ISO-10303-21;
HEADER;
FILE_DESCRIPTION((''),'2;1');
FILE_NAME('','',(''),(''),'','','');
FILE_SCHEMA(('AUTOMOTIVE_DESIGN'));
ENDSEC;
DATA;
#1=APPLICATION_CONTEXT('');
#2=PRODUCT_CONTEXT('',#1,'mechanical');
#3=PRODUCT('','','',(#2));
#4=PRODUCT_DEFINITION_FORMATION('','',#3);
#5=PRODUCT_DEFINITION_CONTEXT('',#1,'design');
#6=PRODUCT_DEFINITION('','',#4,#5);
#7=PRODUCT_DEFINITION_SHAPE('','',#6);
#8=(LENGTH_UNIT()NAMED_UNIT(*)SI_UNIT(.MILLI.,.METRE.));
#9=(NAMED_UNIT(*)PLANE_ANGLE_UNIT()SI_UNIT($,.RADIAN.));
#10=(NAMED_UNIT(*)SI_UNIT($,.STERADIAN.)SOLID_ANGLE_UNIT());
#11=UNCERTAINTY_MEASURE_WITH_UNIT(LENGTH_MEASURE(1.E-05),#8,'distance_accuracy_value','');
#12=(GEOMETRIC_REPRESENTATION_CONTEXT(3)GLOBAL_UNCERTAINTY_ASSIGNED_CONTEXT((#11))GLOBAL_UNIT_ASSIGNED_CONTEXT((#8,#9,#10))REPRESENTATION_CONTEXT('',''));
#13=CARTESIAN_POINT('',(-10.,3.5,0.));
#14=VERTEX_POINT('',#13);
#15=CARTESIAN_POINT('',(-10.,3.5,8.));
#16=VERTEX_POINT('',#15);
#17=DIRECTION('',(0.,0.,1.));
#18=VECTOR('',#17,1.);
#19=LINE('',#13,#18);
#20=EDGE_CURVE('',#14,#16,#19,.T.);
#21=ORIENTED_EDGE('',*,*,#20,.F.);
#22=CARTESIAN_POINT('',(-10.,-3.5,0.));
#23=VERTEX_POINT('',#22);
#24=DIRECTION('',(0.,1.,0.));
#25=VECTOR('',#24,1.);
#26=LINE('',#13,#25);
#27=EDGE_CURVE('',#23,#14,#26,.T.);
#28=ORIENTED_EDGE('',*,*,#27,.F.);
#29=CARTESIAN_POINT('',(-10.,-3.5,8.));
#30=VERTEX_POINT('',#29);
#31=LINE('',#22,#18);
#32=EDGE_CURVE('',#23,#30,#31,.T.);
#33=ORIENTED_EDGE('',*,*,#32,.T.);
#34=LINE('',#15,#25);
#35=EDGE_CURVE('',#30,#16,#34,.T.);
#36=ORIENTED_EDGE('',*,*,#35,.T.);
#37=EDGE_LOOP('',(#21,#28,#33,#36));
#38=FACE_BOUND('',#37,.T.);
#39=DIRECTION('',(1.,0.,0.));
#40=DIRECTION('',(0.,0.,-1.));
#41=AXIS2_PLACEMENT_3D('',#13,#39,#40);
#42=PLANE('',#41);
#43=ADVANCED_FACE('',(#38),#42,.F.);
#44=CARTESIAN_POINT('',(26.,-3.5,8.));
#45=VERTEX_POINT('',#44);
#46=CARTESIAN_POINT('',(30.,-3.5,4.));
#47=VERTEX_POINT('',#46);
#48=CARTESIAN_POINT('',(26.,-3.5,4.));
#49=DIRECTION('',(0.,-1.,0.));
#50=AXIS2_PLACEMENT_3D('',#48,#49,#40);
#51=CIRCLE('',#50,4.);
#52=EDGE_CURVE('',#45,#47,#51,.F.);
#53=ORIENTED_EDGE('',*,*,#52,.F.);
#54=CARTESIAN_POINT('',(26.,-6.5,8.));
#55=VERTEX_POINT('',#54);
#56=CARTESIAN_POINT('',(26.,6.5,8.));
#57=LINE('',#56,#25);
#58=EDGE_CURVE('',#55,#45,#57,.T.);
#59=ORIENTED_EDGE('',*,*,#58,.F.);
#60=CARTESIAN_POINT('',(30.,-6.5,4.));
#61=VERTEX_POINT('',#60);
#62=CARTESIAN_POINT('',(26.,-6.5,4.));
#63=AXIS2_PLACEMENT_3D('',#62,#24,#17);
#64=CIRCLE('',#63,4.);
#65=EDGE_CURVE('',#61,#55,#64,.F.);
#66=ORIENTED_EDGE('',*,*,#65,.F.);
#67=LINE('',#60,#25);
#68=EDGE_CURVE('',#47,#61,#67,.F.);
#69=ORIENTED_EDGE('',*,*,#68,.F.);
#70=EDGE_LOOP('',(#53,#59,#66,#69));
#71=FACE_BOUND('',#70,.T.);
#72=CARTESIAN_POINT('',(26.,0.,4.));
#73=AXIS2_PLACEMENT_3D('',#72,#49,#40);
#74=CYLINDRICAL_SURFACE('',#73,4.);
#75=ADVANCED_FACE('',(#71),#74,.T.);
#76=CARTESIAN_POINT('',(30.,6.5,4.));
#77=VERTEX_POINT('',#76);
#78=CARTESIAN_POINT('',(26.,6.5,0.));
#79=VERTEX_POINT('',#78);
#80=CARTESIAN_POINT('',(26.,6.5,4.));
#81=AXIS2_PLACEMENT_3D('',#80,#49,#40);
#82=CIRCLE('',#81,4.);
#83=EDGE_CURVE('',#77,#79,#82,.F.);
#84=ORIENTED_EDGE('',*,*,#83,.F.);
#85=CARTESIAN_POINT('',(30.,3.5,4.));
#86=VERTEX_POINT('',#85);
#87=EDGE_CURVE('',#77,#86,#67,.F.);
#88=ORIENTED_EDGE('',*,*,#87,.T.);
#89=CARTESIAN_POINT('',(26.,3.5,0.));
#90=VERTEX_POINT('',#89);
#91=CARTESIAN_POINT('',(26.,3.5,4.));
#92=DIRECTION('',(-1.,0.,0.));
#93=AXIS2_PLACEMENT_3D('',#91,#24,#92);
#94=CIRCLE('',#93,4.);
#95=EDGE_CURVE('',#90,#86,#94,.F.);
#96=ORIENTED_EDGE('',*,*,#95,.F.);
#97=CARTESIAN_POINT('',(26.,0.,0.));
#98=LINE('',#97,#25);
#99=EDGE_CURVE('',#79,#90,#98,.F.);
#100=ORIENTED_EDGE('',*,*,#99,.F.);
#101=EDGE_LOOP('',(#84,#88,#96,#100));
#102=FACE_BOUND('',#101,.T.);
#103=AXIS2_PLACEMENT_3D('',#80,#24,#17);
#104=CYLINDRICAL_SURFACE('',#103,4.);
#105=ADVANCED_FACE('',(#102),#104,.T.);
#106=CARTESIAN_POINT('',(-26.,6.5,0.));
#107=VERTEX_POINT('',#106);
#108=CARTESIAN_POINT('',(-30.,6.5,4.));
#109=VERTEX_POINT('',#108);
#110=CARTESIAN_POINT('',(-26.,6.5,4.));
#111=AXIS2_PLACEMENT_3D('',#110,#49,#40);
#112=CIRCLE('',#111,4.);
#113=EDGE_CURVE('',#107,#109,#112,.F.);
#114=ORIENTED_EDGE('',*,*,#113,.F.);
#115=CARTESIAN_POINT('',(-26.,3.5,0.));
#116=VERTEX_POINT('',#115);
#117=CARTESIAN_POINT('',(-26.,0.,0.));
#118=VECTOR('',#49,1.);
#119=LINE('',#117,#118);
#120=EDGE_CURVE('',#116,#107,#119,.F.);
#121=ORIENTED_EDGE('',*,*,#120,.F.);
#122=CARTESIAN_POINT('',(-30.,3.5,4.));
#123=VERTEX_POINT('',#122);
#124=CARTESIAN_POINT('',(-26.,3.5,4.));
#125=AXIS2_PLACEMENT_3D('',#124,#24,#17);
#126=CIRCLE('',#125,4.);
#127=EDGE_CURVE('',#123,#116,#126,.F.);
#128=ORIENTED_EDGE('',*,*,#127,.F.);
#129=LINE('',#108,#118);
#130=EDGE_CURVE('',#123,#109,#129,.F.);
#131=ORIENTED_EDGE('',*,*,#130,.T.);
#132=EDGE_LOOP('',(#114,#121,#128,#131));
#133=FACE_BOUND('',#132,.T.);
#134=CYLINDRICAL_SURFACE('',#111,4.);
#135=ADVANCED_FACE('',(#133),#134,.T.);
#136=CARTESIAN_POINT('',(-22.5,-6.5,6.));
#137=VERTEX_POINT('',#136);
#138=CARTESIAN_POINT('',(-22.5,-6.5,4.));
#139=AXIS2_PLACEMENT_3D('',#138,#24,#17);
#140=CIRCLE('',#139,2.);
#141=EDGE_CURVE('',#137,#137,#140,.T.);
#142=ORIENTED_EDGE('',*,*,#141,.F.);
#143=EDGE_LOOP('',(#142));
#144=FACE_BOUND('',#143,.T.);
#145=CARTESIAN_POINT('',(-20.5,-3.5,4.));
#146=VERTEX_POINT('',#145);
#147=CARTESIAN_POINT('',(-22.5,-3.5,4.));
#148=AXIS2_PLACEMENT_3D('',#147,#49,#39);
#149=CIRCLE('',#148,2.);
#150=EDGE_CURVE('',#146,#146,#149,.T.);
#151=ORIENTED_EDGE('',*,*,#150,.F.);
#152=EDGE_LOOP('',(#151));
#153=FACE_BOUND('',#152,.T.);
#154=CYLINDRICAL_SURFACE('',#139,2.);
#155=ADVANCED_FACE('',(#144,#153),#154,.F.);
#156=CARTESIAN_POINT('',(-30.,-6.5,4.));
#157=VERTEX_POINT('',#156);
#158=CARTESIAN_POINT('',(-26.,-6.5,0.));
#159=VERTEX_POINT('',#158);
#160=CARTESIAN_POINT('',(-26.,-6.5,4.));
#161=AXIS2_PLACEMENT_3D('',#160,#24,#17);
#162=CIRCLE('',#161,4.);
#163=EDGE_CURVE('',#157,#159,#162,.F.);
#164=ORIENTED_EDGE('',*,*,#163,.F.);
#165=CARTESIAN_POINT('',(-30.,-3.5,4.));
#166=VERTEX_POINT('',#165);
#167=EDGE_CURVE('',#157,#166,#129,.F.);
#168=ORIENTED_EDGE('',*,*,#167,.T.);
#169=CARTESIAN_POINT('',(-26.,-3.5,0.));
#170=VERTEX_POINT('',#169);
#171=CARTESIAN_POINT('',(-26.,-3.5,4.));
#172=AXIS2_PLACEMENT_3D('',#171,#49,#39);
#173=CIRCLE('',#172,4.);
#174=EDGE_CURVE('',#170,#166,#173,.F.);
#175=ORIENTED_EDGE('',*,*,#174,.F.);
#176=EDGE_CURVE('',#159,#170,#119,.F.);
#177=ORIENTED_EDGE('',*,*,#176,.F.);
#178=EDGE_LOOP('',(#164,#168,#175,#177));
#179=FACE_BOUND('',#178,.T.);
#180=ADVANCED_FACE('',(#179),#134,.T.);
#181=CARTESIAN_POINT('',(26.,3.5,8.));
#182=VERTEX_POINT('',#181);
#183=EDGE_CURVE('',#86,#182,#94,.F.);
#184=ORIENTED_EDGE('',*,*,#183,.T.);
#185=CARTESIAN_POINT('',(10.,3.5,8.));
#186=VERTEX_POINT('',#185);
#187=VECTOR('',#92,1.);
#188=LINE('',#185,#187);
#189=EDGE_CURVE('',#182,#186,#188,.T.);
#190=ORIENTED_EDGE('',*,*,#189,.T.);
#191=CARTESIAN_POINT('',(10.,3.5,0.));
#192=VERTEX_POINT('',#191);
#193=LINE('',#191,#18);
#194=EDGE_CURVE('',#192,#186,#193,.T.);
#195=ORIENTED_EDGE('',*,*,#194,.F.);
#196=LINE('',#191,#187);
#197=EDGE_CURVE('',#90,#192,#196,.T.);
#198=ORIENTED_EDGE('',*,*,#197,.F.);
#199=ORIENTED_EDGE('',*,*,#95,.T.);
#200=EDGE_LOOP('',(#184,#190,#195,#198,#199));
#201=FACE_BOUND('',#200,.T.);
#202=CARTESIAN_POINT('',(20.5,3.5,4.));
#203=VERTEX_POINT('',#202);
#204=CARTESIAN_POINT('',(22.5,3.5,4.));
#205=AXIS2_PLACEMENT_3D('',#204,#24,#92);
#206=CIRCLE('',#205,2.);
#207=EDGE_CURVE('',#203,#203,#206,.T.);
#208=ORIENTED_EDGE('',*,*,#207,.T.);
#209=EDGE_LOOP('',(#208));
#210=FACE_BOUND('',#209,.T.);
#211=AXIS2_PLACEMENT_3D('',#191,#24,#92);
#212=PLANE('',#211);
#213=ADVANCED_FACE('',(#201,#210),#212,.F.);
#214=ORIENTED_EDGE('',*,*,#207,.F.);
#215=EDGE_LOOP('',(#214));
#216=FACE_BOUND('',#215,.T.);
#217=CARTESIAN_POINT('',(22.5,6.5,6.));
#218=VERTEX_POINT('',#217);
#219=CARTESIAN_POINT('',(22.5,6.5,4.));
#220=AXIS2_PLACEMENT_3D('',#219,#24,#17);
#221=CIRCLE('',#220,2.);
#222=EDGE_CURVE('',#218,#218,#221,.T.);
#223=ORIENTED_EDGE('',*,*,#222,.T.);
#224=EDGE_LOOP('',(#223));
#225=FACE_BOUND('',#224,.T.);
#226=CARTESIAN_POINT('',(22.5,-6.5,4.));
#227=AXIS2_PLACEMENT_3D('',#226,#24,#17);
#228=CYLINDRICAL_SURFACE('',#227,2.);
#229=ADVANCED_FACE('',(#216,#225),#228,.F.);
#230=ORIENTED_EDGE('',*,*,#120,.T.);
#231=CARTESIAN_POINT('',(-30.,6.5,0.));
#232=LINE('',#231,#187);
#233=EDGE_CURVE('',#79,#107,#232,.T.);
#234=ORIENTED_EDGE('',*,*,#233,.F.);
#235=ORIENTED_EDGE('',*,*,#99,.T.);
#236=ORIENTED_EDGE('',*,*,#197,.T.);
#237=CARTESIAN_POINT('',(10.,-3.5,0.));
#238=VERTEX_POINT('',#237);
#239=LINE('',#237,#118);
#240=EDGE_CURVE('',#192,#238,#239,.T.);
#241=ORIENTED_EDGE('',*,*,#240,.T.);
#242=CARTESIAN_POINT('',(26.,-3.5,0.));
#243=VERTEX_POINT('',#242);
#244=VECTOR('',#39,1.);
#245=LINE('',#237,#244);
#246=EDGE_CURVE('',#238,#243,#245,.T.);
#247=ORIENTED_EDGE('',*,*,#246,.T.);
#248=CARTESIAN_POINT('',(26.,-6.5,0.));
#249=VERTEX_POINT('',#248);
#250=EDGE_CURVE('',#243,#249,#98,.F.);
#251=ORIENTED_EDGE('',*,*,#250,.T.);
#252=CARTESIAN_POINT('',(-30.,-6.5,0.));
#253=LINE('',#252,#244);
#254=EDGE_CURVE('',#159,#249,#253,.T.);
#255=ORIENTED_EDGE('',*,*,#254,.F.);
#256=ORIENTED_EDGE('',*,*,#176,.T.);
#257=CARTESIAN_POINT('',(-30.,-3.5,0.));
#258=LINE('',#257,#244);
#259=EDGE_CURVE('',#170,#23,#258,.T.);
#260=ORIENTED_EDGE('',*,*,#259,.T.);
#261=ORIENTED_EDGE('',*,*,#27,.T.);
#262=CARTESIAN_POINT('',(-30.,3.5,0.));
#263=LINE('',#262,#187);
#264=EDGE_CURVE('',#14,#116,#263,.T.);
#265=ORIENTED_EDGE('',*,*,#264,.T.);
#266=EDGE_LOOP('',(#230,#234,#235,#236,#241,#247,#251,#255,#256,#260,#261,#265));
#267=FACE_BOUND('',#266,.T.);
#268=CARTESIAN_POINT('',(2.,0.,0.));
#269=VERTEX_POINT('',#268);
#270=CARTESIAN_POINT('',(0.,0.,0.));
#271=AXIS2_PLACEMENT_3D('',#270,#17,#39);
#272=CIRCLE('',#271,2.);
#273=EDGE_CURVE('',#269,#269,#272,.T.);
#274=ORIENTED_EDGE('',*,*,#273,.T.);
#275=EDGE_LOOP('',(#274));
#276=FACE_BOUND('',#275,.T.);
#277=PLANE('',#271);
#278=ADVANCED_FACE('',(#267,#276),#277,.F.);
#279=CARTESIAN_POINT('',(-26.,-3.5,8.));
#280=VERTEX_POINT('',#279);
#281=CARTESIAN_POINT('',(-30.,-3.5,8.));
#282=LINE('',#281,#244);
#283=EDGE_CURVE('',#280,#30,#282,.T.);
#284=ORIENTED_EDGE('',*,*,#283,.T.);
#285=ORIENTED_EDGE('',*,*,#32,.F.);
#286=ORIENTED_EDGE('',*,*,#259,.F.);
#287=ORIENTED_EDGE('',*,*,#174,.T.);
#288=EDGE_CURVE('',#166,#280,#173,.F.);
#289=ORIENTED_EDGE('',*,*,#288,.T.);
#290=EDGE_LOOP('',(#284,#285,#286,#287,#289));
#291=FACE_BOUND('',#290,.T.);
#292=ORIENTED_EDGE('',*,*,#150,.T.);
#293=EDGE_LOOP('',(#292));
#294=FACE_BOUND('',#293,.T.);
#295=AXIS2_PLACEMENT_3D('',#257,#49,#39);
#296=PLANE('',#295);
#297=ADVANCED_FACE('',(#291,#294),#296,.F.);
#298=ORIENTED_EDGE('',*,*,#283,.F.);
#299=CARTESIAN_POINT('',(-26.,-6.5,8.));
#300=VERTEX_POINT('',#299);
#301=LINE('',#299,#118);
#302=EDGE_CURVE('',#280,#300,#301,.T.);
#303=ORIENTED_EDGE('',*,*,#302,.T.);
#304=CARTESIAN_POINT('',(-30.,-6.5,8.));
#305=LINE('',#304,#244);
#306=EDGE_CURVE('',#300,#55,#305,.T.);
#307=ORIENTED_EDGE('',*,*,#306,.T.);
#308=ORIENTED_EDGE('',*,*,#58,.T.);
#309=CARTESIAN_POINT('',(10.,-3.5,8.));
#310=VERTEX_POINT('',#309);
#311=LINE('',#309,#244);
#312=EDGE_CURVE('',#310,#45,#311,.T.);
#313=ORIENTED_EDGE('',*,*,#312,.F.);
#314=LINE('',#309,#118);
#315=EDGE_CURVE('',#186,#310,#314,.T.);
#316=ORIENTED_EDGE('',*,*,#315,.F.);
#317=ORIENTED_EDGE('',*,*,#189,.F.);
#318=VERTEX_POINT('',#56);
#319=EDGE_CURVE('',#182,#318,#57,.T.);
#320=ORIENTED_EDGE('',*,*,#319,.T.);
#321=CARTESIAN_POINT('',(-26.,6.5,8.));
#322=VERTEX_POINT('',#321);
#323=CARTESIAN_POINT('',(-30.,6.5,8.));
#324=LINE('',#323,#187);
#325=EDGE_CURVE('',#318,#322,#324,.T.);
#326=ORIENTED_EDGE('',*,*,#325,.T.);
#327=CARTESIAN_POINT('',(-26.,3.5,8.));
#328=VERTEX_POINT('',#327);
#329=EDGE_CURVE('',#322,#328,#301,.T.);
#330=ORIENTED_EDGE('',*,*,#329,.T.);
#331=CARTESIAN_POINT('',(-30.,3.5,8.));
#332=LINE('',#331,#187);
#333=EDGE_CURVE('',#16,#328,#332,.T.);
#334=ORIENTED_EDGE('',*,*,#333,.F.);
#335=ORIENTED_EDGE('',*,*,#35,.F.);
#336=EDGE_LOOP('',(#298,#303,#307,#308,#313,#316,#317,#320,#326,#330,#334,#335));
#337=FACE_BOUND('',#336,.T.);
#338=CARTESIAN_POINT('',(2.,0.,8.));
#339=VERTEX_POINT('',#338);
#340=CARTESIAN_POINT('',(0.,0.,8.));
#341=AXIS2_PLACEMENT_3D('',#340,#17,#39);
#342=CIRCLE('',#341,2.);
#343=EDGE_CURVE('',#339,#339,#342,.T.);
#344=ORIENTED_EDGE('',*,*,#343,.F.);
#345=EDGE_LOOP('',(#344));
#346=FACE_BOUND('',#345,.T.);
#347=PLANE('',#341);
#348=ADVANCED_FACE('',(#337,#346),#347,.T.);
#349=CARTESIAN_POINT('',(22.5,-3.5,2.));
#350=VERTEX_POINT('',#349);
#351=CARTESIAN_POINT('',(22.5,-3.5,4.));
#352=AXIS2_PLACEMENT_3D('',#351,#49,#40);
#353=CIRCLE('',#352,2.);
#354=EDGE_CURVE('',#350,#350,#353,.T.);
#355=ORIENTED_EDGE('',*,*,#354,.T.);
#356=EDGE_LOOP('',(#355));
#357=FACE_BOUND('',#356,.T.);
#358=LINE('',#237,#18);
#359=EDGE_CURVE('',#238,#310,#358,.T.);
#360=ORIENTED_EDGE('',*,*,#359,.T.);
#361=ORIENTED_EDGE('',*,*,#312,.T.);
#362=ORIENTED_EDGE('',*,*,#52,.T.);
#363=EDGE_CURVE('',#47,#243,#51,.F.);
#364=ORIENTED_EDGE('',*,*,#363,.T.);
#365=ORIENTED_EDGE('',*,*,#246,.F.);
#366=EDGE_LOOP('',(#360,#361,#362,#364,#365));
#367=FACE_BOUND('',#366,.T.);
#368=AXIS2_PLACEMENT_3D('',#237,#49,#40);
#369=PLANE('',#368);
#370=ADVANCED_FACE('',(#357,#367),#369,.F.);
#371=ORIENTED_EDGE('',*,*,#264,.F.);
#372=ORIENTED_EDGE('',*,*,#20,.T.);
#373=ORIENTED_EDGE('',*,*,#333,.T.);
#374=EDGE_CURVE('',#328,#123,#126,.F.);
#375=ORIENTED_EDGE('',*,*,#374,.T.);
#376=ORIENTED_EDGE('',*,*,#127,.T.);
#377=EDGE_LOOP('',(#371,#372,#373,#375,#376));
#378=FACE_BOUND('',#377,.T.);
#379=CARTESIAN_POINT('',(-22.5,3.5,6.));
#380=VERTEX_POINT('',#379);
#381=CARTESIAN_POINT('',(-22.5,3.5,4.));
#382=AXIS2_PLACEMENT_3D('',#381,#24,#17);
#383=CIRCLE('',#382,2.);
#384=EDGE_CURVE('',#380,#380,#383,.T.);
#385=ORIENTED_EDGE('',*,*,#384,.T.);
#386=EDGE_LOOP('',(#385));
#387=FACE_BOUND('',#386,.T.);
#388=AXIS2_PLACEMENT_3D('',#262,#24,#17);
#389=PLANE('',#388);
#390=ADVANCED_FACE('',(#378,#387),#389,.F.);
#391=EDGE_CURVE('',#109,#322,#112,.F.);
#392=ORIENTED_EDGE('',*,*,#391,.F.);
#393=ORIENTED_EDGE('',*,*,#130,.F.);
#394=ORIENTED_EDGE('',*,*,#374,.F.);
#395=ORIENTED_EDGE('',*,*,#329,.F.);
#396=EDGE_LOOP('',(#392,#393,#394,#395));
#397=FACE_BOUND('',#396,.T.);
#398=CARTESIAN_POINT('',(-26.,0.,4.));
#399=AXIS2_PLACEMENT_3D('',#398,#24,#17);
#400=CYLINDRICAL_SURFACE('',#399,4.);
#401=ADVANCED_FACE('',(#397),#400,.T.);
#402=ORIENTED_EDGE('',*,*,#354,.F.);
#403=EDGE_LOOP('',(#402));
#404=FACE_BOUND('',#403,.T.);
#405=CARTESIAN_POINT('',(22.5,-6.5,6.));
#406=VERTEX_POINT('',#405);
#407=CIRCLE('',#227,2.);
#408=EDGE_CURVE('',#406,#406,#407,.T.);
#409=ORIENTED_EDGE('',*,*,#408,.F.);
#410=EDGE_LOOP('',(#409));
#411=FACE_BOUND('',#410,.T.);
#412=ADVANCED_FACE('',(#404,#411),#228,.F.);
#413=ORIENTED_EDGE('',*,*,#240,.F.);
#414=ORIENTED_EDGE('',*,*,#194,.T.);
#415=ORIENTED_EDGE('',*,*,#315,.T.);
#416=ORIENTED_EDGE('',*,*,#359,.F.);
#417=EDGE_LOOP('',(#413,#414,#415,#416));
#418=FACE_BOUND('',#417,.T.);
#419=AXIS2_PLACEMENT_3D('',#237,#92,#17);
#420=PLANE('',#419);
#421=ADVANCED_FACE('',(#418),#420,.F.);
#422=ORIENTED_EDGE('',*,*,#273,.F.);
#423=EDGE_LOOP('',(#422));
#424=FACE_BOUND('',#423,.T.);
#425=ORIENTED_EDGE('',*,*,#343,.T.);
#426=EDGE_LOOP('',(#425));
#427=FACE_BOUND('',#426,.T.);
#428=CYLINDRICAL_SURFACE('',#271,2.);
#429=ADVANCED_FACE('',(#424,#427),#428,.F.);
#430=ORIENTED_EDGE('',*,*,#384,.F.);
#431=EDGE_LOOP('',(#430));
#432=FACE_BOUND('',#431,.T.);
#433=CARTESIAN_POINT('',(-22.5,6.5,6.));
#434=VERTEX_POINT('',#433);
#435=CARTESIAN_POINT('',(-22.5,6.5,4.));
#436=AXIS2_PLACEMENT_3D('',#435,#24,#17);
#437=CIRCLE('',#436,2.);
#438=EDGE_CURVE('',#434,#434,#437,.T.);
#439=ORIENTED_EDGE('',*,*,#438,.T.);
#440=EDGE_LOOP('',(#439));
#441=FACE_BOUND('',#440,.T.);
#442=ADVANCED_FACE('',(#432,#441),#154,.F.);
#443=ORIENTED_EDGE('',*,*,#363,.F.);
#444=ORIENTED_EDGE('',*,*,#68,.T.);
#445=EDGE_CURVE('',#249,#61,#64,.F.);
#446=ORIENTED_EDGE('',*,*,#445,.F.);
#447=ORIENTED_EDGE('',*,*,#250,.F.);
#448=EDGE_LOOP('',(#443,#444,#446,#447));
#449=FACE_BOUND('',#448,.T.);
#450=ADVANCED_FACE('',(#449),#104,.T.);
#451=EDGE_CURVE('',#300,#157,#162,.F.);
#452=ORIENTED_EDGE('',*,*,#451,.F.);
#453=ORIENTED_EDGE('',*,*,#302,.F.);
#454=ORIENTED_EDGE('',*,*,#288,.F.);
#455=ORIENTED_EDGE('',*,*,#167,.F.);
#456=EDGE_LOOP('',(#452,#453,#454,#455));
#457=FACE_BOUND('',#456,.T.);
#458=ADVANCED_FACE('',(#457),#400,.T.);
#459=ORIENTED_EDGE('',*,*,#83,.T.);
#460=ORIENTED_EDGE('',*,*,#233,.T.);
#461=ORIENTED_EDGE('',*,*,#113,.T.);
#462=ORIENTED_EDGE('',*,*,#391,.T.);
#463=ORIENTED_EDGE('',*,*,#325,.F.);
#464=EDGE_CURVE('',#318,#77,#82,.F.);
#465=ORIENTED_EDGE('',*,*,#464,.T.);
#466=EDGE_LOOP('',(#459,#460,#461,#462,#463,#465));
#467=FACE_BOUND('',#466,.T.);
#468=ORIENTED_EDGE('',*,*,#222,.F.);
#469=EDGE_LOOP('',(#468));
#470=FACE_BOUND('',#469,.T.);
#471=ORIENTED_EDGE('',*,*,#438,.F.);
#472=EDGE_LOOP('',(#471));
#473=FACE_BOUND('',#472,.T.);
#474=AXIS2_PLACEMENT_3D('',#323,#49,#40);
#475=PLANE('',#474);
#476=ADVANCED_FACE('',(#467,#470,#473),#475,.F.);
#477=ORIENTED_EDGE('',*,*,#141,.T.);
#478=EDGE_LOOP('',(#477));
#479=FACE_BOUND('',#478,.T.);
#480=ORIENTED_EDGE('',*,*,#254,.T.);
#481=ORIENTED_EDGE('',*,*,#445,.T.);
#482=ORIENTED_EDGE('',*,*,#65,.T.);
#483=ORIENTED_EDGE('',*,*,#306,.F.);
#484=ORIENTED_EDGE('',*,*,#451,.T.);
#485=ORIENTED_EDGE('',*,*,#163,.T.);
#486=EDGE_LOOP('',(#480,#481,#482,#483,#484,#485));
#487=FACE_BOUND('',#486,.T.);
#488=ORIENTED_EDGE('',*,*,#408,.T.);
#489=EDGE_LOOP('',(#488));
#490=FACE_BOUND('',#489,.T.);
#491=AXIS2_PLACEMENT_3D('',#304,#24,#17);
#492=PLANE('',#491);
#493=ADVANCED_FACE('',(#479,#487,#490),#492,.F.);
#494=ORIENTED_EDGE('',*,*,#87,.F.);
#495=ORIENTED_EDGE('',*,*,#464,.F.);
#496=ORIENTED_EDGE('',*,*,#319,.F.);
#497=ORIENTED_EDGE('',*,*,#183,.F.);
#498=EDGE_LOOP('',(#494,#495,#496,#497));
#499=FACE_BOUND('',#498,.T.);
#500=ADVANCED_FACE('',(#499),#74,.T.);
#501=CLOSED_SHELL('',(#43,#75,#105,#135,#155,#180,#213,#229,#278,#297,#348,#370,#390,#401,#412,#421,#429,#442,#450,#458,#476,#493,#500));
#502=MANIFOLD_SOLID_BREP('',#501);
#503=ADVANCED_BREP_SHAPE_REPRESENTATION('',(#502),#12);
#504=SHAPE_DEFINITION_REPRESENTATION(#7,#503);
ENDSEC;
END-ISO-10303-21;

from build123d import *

# Parameters (mm, degrees)
SKETCH1_W           = 60
SKETCH1_H           = 13
BOSS_EXTRUDE1_DEPTH = 8
FILLET1_R           = 4
SKETCH2_W           = 20
SKETCH2_H           = 7
CUT_EXTRUDE1_DEPTH  = 32.721443851
SKETCH3_R           = 2
CUT_EXTRUDE2_DEPTH  = 34.660065359
SKETCH4_R           = 2
CUT_EXTRUDE3_DEPTH  = 32.721443851


with BuildPart() as part:
    # Sketch1 → Boss-Extrude1 (new body)
    with BuildSketch(Plane.XY):
        Rectangle(SKETCH1_W, SKETCH1_H)
    extrude(amount=BOSS_EXTRUDE1_DEPTH)

    # Fillet1
    fillet1_edges = [part.edges().sort_by_distance(p)[0] for p in [
        (-30, 0, 0),
        (30, 0, 0),
        (30, 0, 8),
        (-30, 0, 8),
    ]]
    fillet(fillet1_edges, radius=FILLET1_R - 0.0001)  # a hair under: the kernel refuses the full size

    # Sketch2 → Cut-Extrude1 (cut, through all)
    with BuildSketch(Plane.XY.offset(8)):
        with Locations((-20, 0)):
            Rectangle(SKETCH2_W, SKETCH2_H)
        with Locations((20, 0)):
            Rectangle(SKETCH2_W, SKETCH2_H)
    extrude(amount=-CUT_EXTRUDE1_DEPTH, mode=Mode.SUBTRACT)

    # Sketch3 → Cut-Extrude2 (cut, through all)
    with BuildSketch(Plane(origin=(0, 6.5, 0), x_dir=(1, 0, 0), z_dir=(0, 1, 0))):
        with Locations(Location((-22.5, -4, 0), (0, 0, 270))):
            Circle(SKETCH3_R)
        with Locations(Location((22.5, -4, 0), (0, 0, 270))):
            Circle(SKETCH3_R)
    extrude(amount=-CUT_EXTRUDE2_DEPTH, mode=Mode.SUBTRACT)

    # Sketch4 → Cut-Extrude3 (cut, through all)
    with BuildSketch(Plane.XY.offset(8)):
        Circle(SKETCH4_R)
    extrude(amount=-CUT_EXTRUDE3_DEPTH, mode=Mode.SUBTRACT)


solid = part.part
